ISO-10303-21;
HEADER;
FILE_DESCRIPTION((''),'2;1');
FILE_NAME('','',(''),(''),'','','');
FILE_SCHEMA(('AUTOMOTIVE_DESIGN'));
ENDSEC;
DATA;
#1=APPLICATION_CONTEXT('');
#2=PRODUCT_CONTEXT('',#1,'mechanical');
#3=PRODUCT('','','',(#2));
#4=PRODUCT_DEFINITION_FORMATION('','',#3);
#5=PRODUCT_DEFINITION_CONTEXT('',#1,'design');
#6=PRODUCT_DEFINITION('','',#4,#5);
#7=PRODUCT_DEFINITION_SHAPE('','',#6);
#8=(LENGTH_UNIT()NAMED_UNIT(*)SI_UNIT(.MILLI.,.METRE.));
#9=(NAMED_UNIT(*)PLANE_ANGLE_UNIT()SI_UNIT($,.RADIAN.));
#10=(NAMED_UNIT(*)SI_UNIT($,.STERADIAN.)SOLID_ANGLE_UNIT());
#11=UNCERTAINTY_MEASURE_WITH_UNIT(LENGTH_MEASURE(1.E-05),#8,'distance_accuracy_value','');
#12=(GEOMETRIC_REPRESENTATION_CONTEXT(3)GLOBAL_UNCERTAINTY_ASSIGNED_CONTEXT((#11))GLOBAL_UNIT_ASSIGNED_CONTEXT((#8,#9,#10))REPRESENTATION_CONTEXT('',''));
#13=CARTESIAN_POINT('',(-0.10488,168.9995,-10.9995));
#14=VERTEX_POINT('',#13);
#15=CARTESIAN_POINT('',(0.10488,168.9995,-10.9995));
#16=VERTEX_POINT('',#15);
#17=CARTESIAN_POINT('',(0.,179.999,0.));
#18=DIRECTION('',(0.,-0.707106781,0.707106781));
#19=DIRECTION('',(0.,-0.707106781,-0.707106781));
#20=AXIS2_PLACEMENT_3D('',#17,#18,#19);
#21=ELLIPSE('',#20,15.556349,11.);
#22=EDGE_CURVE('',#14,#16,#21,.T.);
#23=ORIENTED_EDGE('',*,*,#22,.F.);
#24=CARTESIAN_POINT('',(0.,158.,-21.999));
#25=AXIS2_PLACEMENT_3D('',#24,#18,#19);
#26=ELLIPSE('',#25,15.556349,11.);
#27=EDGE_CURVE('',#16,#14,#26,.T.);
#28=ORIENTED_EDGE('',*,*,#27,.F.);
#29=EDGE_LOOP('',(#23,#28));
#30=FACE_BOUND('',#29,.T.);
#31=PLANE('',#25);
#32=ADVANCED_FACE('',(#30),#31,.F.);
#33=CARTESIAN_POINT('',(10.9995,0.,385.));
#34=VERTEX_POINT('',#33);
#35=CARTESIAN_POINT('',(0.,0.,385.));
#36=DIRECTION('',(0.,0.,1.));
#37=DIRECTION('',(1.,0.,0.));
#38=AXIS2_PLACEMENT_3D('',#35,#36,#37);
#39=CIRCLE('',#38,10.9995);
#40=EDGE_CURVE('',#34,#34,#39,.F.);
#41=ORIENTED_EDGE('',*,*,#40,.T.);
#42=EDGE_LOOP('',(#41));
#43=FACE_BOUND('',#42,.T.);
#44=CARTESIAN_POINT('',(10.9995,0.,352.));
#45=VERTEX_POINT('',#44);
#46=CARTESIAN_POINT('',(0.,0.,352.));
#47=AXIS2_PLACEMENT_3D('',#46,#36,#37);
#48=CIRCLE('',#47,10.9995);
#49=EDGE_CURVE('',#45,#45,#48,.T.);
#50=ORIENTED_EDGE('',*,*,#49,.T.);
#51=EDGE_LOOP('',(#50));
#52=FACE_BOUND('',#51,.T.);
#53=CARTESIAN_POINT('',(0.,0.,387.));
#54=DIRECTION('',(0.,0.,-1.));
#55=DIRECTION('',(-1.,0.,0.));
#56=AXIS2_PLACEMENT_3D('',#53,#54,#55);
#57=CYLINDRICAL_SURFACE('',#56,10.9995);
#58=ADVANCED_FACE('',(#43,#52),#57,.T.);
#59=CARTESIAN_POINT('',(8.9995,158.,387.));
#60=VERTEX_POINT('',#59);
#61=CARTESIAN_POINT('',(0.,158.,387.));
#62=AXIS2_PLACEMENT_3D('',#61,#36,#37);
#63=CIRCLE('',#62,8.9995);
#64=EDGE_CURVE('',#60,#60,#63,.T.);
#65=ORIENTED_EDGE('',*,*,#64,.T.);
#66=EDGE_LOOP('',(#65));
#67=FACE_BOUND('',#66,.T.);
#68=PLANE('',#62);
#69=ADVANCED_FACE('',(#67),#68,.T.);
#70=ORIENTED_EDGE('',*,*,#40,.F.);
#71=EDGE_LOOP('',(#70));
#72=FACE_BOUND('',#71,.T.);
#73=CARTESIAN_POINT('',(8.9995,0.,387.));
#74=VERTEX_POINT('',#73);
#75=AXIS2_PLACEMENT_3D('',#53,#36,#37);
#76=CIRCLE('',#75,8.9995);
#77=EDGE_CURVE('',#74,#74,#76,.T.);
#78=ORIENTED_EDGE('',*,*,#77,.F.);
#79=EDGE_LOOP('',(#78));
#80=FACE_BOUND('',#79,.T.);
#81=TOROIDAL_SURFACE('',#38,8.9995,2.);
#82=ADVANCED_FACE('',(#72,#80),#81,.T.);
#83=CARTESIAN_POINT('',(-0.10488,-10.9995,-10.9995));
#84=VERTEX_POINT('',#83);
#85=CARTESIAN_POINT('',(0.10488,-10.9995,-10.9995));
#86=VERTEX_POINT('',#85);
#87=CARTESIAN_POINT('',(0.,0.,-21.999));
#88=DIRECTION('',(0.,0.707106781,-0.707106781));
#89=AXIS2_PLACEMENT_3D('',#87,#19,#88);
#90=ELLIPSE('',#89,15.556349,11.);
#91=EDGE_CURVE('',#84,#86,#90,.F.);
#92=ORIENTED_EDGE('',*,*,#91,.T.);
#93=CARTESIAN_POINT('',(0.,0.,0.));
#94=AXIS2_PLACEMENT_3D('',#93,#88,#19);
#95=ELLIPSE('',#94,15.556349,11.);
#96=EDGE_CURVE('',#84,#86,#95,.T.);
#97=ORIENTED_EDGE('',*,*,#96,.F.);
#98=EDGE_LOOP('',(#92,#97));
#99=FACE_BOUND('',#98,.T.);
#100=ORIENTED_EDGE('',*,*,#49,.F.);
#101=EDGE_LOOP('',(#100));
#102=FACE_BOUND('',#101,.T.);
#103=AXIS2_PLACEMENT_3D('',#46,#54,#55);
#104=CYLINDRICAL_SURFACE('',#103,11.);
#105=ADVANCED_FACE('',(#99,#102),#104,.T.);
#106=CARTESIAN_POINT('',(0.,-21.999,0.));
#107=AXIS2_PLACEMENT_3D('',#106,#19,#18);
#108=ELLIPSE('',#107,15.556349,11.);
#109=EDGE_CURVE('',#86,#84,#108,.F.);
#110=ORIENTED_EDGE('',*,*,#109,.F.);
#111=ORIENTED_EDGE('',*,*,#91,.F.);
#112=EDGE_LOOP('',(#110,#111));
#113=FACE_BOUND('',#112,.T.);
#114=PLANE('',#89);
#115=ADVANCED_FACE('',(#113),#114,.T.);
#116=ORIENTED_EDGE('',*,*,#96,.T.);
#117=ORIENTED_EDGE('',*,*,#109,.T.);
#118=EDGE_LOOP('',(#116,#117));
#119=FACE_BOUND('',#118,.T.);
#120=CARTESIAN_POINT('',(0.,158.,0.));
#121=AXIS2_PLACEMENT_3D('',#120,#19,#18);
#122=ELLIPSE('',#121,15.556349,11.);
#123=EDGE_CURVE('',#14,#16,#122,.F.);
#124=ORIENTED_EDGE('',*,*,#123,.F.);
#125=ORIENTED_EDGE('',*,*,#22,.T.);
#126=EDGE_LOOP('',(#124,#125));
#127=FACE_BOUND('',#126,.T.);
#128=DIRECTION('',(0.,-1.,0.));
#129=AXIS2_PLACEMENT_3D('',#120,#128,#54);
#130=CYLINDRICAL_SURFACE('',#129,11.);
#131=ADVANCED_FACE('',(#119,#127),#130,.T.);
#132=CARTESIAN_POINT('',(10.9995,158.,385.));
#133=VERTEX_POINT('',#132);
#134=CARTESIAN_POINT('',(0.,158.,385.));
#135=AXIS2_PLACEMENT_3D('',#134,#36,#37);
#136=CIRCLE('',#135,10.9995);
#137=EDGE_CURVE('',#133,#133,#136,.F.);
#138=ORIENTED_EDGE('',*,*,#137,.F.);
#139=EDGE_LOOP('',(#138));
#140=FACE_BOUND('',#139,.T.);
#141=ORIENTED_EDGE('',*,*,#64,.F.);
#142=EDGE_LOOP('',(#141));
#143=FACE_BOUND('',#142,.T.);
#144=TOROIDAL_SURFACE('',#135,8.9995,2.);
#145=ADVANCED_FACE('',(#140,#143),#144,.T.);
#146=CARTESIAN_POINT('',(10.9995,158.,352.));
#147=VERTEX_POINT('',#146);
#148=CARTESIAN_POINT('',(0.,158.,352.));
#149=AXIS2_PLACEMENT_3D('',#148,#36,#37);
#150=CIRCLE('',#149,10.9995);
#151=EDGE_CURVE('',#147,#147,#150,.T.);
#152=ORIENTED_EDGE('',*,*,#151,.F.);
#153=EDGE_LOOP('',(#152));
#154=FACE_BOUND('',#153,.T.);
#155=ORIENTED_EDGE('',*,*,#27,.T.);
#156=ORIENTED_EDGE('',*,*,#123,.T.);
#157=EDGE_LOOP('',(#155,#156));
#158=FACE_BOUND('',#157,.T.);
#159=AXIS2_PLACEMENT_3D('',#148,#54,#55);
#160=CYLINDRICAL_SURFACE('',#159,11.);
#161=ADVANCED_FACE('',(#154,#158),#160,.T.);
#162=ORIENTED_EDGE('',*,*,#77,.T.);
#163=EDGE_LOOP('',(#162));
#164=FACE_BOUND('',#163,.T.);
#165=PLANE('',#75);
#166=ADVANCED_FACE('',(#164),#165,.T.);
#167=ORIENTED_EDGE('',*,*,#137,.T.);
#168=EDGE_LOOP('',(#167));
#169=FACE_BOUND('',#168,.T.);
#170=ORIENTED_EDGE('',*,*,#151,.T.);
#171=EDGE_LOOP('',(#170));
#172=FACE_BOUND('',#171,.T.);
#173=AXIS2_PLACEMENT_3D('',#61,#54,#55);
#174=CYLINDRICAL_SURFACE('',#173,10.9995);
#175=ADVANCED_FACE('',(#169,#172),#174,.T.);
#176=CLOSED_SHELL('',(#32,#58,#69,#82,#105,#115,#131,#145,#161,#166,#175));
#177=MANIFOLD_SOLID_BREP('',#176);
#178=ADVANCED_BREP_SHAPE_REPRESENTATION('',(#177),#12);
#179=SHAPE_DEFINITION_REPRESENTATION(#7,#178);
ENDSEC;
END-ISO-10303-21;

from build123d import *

# Parameters (mm, degrees)
SKETCH_1_R                 = 11
EXTRUDE_1_DEPTH            = 352
SKETCH_2_R                 = 11
EXTRUDE_2_DEPTH            = 158
PATTERN_LINEAR_1_OUTLINE_R = 11
PATTERN_LINEAR_1_DEPTH     = 352
SKETCH_3_R                 = 10.9995
EXTRUDE_3_DEPTH            = 35
CHAMFER_1_SIZE             = 21.999
FILLET_1_R                 = 2


with BuildPart() as part:
    # 草图1 → 拉伸1 (new body)
    with BuildSketch(Plane.XY):
        Circle(SKETCH_1_R)
    extrude(amount=EXTRUDE_1_DEPTH)

    # 草图2 → 拉伸2 (add)
    with BuildSketch(Plane(origin=(0, 0, 0), x_dir=(1, 0, 0), z_dir=(0, 1, 0))):
        with Locations(Location((0, 0, 0), (0, 0, 180))):
            Circle(SKETCH_2_R)
    extrude(amount=EXTRUDE_2_DEPTH)


with BuildPart() as pattern_linear_1_tool:
    # 阵列(线性)1: read off the stored shape, not the designer's step
    # 阵列(线性)1 outline → 阵列(线性)1 (new body)
    with BuildSketch(Plane.XY):
        with Locations((0, 158)):
            Circle(PATTERN_LINEAR_1_OUTLINE_R)
    extrude(amount=PATTERN_LINEAR_1_DEPTH)


with BuildPart() as part_1:
    add(part.part)


with BuildPart() as part_2:
    # 阵列(线性)1: joined with pattern_linear_1_tool
    add(part_1.part.fuse(pattern_linear_1_tool.part, tol=0.00001))

    # 草图3 → 拉伸3 (add)
    with BuildSketch(Plane.XY.offset(352)):
        with Locations((0, 158)):
            Circle(SKETCH_3_R)
        Circle(SKETCH_3_R)
    extrude(amount=EXTRUDE_3_DEPTH)

    # 倒角1
    # the kernel refuses this chamfer: 21.999 mm, written as the material it adds along each edge
    with BuildSketch(Plane(origin=(67.574454052, 0, 0), x_dir=(0, -1, 0), z_dir=(-1, 0, 0))) as chamfer_1_piece_1_section:
        Polygon((CHAMFER_1_SIZE, 0), (0, -CHAMFER_1_SIZE), (0, 0), align=None)
    chamfer_1_piece_1 = extrude(amount=135.148908105, mode=Mode.PRIVATE)
    chamfer_1_piece_1 = chamfer_1_piece_1 & Plane(origin=(0, 0, 0), x_dir=(1, 0, 0), z_dir=(0, 0, -1)) * Cylinder(11, 359, mode=Mode.PRIVATE)
    chamfer_1_piece_1 = chamfer_1_piece_1 & Plane(origin=(0, 0, 0), x_dir=(-1, 0, 0), z_dir=(0, -1, 0)) * Cylinder(11, 359, mode=Mode.PRIVATE)
    add(chamfer_1_piece_1)
    with BuildSketch(Plane(origin=(-67.574454052, 158, 0), x_dir=(0, 0, -1), z_dir=(1, 0, 0))) as chamfer_1_piece_2_section:
        Polygon((CHAMFER_1_SIZE, 0), (0, CHAMFER_1_SIZE), (0, 0), align=None)
    chamfer_1_piece_2 = extrude(amount=135.148908105, mode=Mode.PRIVATE)
    chamfer_1_piece_2 = chamfer_1_piece_2 & Plane(origin=(0, 158, 0), x_dir=(-1, 0, 0), z_dir=(0, -1, 0)) * Cylinder(11, 359, mode=Mode.PRIVATE)
    chamfer_1_piece_2 = chamfer_1_piece_2 & Plane(origin=(0, 158, 0), x_dir=(1, 0, 0), z_dir=(0, 0, -1)) * Cylinder(11, 359, mode=Mode.PRIVATE)
    add(chamfer_1_piece_2)

    # 圆角1
    fillet_1_edges = [part_2.edges().sort_by_distance(p)[0] for p in [
        (-10.9995, 158, 387),
        (-10.9995, 0, 387),
    ]]
    fillet(fillet_1_edges, radius=FILLET_1_R)


solid = part_2.part
